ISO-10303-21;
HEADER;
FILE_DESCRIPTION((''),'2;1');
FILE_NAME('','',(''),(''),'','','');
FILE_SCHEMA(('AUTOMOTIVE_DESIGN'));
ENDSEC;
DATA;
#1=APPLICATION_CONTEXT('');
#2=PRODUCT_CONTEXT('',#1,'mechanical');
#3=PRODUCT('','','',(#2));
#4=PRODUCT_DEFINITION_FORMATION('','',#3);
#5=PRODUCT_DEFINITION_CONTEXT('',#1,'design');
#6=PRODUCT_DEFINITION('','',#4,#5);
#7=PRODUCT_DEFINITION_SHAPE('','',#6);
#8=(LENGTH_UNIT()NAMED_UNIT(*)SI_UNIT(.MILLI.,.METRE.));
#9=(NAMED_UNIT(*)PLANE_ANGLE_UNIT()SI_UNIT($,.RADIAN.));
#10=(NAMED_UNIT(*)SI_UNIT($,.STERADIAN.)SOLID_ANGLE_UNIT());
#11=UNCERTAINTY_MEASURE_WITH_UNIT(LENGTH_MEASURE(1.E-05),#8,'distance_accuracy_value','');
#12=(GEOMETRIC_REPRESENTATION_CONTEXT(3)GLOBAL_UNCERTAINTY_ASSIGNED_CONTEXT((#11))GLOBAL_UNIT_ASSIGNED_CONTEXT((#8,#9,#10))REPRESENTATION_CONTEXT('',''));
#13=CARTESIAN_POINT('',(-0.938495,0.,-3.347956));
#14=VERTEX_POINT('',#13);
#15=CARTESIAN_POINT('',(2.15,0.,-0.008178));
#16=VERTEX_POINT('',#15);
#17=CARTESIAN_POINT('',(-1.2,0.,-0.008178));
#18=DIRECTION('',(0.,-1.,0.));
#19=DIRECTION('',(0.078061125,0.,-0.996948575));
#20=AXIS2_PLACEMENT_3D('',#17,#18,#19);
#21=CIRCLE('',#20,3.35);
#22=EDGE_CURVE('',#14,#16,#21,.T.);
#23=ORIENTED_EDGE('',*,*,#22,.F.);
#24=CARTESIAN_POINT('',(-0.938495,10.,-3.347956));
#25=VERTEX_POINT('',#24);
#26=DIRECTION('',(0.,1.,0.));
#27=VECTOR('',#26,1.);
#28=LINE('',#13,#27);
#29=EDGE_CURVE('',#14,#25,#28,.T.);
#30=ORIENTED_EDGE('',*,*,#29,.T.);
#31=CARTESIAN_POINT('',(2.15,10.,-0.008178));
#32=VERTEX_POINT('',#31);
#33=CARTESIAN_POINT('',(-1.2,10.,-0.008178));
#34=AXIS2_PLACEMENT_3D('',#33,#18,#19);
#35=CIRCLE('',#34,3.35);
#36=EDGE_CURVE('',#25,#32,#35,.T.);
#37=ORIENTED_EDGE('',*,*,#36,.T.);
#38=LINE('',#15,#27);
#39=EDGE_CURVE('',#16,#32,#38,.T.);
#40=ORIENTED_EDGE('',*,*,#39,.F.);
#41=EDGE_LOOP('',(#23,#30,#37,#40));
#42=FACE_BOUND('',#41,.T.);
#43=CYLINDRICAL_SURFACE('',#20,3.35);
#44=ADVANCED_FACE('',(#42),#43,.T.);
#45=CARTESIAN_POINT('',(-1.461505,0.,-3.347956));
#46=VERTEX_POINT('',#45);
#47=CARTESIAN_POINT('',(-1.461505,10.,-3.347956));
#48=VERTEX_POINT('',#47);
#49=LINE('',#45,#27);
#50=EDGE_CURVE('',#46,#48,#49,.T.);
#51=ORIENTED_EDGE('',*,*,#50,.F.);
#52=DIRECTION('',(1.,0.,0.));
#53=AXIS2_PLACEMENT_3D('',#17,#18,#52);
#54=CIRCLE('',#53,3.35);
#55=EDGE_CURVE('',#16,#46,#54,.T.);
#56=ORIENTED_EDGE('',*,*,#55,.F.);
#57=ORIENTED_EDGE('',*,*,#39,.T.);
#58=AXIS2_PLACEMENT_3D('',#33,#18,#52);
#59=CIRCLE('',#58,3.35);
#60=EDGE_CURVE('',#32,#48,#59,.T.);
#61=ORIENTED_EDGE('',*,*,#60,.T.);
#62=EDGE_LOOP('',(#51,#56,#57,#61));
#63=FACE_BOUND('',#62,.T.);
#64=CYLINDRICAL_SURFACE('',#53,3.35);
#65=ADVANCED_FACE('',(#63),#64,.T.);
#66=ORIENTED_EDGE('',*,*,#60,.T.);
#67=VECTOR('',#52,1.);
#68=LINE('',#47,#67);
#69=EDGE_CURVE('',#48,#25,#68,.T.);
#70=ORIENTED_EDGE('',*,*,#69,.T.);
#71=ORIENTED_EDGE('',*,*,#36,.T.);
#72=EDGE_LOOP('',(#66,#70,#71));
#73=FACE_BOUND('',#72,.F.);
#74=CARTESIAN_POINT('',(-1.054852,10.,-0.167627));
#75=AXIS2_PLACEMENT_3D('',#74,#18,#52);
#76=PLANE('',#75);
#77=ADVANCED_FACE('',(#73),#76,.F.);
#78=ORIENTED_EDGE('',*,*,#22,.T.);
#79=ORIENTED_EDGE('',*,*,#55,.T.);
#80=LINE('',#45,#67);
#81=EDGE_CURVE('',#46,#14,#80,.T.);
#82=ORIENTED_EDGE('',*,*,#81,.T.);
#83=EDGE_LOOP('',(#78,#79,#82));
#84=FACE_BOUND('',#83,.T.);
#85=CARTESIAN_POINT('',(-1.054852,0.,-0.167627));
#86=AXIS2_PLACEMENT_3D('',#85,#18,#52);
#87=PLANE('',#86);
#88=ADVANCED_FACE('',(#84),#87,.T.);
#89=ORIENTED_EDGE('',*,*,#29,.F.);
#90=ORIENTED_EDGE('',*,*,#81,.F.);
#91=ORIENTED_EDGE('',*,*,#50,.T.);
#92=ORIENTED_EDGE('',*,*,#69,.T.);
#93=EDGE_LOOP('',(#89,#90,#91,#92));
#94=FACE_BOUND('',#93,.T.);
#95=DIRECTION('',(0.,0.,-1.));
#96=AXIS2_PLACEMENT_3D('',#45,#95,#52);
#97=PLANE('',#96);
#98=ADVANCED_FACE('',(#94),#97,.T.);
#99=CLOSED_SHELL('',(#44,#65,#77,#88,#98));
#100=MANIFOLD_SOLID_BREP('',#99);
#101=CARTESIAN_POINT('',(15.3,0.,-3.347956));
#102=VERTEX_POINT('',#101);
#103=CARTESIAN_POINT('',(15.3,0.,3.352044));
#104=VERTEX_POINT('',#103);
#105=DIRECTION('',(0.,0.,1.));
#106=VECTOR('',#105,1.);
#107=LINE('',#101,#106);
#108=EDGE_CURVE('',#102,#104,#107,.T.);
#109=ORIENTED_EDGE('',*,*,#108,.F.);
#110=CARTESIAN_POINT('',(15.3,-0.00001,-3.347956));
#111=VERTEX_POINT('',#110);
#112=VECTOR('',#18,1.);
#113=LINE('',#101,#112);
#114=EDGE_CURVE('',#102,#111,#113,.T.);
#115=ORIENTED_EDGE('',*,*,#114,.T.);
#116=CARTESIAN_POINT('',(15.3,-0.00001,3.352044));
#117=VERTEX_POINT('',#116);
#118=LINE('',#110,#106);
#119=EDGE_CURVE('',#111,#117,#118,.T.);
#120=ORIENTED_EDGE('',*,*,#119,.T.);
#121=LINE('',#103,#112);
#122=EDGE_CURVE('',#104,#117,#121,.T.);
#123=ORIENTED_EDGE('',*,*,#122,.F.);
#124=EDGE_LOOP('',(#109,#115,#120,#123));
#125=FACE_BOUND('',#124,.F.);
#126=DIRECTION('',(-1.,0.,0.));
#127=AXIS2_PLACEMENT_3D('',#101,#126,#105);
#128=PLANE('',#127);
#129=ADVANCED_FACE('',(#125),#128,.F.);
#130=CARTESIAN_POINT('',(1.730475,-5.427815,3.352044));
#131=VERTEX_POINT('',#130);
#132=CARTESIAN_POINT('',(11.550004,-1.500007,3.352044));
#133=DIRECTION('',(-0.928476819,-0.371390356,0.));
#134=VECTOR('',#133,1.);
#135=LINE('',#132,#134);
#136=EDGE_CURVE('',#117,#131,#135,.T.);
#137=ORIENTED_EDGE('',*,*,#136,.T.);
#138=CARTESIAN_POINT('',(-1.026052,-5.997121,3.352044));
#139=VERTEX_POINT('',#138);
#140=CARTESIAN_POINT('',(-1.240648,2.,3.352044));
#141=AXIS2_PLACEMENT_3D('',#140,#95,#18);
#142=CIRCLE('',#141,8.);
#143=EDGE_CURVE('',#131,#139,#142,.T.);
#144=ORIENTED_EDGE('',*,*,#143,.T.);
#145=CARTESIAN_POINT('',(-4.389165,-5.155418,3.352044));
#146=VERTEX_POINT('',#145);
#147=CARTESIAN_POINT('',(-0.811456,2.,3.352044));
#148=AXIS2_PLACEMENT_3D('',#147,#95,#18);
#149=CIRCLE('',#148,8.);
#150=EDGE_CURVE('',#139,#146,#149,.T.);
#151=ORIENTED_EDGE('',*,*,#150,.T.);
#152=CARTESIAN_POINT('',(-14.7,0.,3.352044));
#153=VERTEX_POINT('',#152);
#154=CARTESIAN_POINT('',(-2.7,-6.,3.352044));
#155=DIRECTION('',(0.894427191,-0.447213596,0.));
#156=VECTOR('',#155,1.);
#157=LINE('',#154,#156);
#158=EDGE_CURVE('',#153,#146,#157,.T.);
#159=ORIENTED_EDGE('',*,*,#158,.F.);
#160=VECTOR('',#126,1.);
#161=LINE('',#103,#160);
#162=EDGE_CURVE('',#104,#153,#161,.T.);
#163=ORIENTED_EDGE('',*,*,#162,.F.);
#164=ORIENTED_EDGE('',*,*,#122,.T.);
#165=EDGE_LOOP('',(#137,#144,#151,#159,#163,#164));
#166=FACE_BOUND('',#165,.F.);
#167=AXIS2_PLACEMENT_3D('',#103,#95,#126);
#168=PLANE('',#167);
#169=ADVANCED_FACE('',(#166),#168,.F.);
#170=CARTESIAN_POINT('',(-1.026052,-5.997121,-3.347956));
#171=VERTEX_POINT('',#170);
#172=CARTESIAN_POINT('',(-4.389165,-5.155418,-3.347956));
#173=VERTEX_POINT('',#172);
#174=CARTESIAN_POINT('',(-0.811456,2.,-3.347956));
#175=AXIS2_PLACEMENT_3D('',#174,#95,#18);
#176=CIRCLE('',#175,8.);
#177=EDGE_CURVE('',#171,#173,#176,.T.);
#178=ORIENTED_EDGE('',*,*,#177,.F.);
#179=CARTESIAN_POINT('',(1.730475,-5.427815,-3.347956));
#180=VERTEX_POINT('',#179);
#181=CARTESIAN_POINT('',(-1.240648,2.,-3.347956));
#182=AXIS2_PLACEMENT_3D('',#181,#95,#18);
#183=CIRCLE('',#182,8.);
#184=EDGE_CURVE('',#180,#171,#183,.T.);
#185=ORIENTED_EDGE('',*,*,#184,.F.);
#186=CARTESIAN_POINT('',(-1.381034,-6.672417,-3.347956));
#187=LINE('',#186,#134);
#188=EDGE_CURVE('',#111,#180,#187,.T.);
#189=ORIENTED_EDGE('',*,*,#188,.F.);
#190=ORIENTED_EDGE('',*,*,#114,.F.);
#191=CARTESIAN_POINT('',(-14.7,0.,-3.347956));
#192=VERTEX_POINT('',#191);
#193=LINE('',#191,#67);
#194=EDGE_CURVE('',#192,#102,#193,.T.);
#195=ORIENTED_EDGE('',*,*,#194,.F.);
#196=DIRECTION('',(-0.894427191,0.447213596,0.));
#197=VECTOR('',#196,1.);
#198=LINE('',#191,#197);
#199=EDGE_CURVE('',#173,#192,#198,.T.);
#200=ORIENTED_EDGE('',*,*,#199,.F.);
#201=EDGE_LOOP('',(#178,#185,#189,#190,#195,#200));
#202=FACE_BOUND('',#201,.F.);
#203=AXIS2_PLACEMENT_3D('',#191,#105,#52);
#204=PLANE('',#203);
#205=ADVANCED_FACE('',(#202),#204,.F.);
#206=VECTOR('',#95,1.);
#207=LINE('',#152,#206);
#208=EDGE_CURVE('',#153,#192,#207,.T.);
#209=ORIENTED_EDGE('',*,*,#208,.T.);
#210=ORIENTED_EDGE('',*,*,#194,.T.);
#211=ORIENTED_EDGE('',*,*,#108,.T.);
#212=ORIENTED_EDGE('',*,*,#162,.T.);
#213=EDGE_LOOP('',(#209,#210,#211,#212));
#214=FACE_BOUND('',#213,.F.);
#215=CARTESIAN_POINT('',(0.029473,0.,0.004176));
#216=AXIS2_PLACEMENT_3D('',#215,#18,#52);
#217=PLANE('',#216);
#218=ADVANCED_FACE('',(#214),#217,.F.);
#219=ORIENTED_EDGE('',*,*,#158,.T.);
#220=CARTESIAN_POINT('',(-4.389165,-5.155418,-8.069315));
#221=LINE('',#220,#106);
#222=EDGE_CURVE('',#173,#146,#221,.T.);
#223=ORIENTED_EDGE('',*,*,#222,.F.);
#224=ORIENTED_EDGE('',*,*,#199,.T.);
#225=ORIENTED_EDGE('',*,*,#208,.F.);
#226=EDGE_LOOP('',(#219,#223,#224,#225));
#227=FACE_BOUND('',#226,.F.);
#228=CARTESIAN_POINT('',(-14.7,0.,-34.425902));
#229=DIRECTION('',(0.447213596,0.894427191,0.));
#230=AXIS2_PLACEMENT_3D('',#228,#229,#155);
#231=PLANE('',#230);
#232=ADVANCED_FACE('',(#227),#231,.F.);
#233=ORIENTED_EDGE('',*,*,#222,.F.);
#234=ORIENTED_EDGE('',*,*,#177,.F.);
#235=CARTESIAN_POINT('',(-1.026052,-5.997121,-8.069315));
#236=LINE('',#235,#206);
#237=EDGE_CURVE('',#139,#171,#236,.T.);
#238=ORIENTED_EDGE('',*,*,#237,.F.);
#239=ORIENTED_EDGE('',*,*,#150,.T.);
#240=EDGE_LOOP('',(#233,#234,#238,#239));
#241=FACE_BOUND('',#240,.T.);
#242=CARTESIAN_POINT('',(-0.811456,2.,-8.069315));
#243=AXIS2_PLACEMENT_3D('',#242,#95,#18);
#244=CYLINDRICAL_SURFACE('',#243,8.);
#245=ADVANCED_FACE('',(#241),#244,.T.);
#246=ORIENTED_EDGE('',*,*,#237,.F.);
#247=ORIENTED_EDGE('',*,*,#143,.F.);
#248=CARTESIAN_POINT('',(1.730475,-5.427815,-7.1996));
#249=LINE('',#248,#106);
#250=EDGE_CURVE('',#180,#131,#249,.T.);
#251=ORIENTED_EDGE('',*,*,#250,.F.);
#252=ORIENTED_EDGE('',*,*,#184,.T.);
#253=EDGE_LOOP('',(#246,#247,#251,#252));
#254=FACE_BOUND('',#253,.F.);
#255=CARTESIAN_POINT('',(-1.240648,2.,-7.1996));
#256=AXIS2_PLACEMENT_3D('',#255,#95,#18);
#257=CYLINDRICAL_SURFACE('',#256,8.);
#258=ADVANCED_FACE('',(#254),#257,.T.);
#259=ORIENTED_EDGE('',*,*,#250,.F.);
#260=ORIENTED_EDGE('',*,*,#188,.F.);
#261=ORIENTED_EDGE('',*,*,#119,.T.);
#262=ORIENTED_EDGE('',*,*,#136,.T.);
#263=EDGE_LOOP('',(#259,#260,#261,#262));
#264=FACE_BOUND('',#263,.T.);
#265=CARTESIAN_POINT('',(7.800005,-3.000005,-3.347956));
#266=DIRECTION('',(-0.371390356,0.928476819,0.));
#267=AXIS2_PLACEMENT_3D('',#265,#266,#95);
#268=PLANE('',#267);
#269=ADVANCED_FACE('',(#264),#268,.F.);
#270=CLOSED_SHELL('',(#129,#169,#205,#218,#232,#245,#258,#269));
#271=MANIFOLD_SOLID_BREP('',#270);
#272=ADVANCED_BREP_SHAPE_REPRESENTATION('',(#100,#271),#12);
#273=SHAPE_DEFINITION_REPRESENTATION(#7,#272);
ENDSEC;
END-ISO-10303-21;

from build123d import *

# Parameters (mm, degrees)
F1_DEPTH    = 10
F2_DEPTH    = 6
F3_T1_DEPTH = 68.8558929709
F4_SIZE2    = 14.99999
F4_SIZE     = 5.99999
F5_T1_DEPTH = 16.1427191
F5_T3_DEPTH = 14.4032889904


# Not quite as in the source:
# - a fillet or chamfer that OpenCascade refuses, or shapes differently, is made with other operations: its cross-section is extruded or revolved along the edge and cut away or added
# - a fillet or chamfer is up to 0.001 mm smaller than in the source, because OpenCascade refuses the exact size


with BuildPart() as f1:
    # F0 (on Front) → F1 (new body)
    with BuildSketch(Plane.XZ):
        with BuildLine():
            ThreePointArc((2.15, -0.0081778196), (-3.4744734584, 2.4513486566), (-1.4615047685, -3.3479555451))
            Line((-1.4615047685, -3.3479555451), (-0.9384952315, -3.3479555451))
            ThreePointArc((-0.9384952315, -3.3479555451), (1.2595264762, -2.2826512779), (2.15, -0.0081778196))
        make_face()
    extrude(amount=-F1_DEPTH)


with BuildPart() as f2:
    # F0 (on Front) → F2 (new body)
    with BuildSketch(Plane.XZ):
        with BuildLine():
            Line((15.3, 3.3520444549), (-14.7, 3.3520444549))
            Line((-14.7, 3.3520444549), (-14.7, -3.3479555451))
            Line((-14.7, -3.3479555451), (-1.4615047685, -3.3479555451))
            ThreePointArc((-1.4615047685, -3.3479555451), (-3.4744734584, 2.4513486566), (2.15, -0.0081778196))
            ThreePointArc((2.15, -0.0081778196), (1.2595264762, -2.2826512779), (-0.9384952315, -3.3479555451))
            Line((-0.9384952315, -3.3479555451), (15.3, -3.3479555451))
            Line((15.3, -3.3479555451), (15.3, 3.3520444549))
        make_face()
        with BuildLine():
            ThreePointArc((2.15, -0.0081778196), (-3.4744734584, 2.4513486566), (-1.4615047685, -3.3479555451))
            Line((-1.4615047685, -3.3479555451), (-0.9384952315, -3.3479555451))
            ThreePointArc((-0.9384952315, -3.3479555451), (1.2595264762, -2.2826512779), (2.15, -0.0081778196))
        make_face()
    extrude(amount=F2_DEPTH)

    # F3: chamfer of 12 x 6 on 1 edges, made by hand

    # F3_s2 → F3_t1 (cut)
    with BuildSketch(Plane.XY.offset(-34.4259020306)):
        Polygon((-14.7, 0), (-2.7, -6), (-14.7, -6), align=None)
    extrude(amount=F3_T1_DEPTH, mode=Mode.SUBTRACT)

    # F4 (size 6 and 15 in the source; OpenCascade refuses exactly that, so slightly less here)
    f4_edges = [f2.edges().sort_by_distance(p)[0] for p in [
        (15.3, -6, 0.002044),
    ]]
    f4_side = f2.faces().sort_by_distance((15.3, -3, 0.002044))[0]
    chamfer(f4_edges, length=F4_SIZE, length2=F4_SIZE2, reference=f4_side)

    # F5: fillet of radius 8 on 2 edges, made by hand

    # F5_s2 → F5_t1 (cut)
    with BuildSketch(Plane.XY.offset(-8.0693150951)):
        with BuildLine():
            ThreePointArc((-0.81145618, -6), (-2.6494795444, -5.7859919157), (-4.389164944, -5.155417528))
            Line((-4.389164944, -5.155417528), (-2.7, -6))
            Line((-2.7, -6), (-0.81145618, -6))
        make_face()
    extrude(amount=F5_T1_DEPTH, mode=Mode.SUBTRACT)

    # F5_s4 → F5_t3 (cut)
    with BuildSketch(Plane.XY.offset(-7.1996000403)):
        with BuildLine():
            ThreePointArc((-1.2406477981, -6), (0.2722110167, -5.8556513547), (1.7304750514, -5.4278145516))
            Line((1.7304750514, -5.4278145516), (0.30001, -6))
            Line((0.30001, -6), (-1.2406477981, -6))
        make_face()
    extrude(amount=F5_T3_DEPTH, mode=Mode.SUBTRACT)


solid = Compound([f1.part, f2.part])
